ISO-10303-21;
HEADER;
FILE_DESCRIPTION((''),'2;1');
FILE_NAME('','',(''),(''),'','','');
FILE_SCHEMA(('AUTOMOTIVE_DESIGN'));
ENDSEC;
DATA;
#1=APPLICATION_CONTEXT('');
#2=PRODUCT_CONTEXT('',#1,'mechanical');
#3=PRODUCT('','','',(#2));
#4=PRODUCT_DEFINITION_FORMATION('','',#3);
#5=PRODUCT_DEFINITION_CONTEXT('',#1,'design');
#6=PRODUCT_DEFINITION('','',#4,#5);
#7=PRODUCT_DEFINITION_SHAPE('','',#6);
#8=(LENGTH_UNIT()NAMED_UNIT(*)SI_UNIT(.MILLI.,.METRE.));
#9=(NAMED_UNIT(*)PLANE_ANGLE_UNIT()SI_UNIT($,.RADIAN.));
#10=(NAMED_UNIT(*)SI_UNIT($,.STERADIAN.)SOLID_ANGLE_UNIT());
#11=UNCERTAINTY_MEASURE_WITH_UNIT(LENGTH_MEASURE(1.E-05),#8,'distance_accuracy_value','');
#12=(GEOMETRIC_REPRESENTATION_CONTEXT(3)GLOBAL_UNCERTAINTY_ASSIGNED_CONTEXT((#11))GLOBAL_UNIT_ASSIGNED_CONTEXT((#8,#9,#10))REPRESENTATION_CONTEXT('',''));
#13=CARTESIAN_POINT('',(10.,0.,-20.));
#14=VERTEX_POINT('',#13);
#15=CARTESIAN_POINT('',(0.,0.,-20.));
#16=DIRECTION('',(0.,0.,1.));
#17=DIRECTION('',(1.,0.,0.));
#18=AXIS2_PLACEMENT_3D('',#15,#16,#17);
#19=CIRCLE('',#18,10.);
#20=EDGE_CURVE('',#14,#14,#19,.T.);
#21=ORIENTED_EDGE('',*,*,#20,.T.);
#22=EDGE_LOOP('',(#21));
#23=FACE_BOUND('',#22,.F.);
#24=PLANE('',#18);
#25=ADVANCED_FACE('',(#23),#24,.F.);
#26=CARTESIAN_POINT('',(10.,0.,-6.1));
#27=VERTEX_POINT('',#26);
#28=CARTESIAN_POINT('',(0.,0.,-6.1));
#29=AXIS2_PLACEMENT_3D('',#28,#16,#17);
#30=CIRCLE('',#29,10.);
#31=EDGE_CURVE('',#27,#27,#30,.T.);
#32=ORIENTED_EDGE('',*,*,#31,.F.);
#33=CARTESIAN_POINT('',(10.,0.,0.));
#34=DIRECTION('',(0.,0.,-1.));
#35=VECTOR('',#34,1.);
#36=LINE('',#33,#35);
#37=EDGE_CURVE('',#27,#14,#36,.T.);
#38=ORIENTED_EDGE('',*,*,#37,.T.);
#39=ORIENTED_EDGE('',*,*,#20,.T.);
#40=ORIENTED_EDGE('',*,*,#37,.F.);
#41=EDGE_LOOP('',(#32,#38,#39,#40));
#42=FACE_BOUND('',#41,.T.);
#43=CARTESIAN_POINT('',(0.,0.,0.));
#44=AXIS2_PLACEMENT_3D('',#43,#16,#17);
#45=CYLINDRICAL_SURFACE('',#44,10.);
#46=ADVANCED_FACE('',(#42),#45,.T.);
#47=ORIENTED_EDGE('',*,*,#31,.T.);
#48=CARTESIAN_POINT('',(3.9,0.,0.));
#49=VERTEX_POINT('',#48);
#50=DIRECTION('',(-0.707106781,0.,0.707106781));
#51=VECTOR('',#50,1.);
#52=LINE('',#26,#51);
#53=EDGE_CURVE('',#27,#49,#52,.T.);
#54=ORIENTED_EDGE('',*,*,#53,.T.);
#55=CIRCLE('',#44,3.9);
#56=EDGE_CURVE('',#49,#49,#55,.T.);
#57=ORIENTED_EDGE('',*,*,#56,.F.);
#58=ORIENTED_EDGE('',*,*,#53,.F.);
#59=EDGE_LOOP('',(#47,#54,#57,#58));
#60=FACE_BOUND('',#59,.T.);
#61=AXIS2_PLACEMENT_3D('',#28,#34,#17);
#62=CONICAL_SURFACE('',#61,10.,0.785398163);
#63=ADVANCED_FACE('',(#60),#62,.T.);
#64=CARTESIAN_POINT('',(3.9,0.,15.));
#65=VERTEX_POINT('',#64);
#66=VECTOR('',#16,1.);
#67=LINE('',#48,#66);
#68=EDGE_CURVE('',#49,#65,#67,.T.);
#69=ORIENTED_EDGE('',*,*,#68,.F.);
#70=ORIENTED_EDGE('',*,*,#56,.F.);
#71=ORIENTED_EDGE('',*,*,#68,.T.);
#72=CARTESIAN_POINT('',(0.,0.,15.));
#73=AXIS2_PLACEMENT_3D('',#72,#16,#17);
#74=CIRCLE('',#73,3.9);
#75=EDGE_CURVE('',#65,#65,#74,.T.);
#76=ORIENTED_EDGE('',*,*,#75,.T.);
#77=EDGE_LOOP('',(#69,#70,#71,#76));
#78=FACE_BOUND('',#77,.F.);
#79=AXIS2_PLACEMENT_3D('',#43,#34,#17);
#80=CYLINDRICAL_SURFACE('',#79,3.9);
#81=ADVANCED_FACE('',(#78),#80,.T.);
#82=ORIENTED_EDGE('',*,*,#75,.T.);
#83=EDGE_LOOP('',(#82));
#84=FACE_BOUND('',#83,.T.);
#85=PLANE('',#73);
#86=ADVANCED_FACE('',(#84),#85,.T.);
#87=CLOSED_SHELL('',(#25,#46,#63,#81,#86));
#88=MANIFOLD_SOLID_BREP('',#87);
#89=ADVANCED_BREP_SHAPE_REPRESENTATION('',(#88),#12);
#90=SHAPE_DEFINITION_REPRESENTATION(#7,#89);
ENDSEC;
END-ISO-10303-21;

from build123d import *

# Parameters (mm, degrees)
F0_R        = 3.9
F1_DEPTH    = 15
F2_R        = 10
F3_DEPTH    = 20
F4_S5_R     = 3.9
F4_T6_DEPTH = 16


# Not quite as in the source:
# - a fillet or chamfer that OpenCascade refuses, or shapes differently, is made with other operations: its cross-section is extruded or revolved along the edge and cut away or added


with BuildPart() as f1:
    # F0 (on Top) → F1 (new body)
    with BuildSketch(Plane.XY):
        Circle(F0_R)
    extrude(amount=F1_DEPTH)

    # F2 (on Top) → F3 (join)
    with BuildSketch(Plane.XY):
        Circle(F2_R)
    extrude(amount=-F3_DEPTH)

    # F4: chamfer of 6.1 on 1 edges, made by hand


with BuildPart() as f4_tool2:
    # F4_s3 → F4_t4 (revolve)
    with BuildSketch(Plane.XZ):
        Polygon((10, -6.1), (3.9, 0), (10, 0), align=None)
    revolve(axis=Axis((0, 0, 0), (0, 0, 1)))

    # F4_s5 → F4_t6 (cut, symmetric)
    with BuildSketch(Plane.XY.offset(-3)):
        Circle(F4_S5_R)
    extrude(amount=F4_T6_DEPTH, both=True, mode=Mode.SUBTRACT)


with BuildPart() as f1_1:
    add(f1.part)

    # F4_t1: cut F4_tool2
    add(f4_tool2.part, mode=Mode.SUBTRACT)


solid = f1_1.part
